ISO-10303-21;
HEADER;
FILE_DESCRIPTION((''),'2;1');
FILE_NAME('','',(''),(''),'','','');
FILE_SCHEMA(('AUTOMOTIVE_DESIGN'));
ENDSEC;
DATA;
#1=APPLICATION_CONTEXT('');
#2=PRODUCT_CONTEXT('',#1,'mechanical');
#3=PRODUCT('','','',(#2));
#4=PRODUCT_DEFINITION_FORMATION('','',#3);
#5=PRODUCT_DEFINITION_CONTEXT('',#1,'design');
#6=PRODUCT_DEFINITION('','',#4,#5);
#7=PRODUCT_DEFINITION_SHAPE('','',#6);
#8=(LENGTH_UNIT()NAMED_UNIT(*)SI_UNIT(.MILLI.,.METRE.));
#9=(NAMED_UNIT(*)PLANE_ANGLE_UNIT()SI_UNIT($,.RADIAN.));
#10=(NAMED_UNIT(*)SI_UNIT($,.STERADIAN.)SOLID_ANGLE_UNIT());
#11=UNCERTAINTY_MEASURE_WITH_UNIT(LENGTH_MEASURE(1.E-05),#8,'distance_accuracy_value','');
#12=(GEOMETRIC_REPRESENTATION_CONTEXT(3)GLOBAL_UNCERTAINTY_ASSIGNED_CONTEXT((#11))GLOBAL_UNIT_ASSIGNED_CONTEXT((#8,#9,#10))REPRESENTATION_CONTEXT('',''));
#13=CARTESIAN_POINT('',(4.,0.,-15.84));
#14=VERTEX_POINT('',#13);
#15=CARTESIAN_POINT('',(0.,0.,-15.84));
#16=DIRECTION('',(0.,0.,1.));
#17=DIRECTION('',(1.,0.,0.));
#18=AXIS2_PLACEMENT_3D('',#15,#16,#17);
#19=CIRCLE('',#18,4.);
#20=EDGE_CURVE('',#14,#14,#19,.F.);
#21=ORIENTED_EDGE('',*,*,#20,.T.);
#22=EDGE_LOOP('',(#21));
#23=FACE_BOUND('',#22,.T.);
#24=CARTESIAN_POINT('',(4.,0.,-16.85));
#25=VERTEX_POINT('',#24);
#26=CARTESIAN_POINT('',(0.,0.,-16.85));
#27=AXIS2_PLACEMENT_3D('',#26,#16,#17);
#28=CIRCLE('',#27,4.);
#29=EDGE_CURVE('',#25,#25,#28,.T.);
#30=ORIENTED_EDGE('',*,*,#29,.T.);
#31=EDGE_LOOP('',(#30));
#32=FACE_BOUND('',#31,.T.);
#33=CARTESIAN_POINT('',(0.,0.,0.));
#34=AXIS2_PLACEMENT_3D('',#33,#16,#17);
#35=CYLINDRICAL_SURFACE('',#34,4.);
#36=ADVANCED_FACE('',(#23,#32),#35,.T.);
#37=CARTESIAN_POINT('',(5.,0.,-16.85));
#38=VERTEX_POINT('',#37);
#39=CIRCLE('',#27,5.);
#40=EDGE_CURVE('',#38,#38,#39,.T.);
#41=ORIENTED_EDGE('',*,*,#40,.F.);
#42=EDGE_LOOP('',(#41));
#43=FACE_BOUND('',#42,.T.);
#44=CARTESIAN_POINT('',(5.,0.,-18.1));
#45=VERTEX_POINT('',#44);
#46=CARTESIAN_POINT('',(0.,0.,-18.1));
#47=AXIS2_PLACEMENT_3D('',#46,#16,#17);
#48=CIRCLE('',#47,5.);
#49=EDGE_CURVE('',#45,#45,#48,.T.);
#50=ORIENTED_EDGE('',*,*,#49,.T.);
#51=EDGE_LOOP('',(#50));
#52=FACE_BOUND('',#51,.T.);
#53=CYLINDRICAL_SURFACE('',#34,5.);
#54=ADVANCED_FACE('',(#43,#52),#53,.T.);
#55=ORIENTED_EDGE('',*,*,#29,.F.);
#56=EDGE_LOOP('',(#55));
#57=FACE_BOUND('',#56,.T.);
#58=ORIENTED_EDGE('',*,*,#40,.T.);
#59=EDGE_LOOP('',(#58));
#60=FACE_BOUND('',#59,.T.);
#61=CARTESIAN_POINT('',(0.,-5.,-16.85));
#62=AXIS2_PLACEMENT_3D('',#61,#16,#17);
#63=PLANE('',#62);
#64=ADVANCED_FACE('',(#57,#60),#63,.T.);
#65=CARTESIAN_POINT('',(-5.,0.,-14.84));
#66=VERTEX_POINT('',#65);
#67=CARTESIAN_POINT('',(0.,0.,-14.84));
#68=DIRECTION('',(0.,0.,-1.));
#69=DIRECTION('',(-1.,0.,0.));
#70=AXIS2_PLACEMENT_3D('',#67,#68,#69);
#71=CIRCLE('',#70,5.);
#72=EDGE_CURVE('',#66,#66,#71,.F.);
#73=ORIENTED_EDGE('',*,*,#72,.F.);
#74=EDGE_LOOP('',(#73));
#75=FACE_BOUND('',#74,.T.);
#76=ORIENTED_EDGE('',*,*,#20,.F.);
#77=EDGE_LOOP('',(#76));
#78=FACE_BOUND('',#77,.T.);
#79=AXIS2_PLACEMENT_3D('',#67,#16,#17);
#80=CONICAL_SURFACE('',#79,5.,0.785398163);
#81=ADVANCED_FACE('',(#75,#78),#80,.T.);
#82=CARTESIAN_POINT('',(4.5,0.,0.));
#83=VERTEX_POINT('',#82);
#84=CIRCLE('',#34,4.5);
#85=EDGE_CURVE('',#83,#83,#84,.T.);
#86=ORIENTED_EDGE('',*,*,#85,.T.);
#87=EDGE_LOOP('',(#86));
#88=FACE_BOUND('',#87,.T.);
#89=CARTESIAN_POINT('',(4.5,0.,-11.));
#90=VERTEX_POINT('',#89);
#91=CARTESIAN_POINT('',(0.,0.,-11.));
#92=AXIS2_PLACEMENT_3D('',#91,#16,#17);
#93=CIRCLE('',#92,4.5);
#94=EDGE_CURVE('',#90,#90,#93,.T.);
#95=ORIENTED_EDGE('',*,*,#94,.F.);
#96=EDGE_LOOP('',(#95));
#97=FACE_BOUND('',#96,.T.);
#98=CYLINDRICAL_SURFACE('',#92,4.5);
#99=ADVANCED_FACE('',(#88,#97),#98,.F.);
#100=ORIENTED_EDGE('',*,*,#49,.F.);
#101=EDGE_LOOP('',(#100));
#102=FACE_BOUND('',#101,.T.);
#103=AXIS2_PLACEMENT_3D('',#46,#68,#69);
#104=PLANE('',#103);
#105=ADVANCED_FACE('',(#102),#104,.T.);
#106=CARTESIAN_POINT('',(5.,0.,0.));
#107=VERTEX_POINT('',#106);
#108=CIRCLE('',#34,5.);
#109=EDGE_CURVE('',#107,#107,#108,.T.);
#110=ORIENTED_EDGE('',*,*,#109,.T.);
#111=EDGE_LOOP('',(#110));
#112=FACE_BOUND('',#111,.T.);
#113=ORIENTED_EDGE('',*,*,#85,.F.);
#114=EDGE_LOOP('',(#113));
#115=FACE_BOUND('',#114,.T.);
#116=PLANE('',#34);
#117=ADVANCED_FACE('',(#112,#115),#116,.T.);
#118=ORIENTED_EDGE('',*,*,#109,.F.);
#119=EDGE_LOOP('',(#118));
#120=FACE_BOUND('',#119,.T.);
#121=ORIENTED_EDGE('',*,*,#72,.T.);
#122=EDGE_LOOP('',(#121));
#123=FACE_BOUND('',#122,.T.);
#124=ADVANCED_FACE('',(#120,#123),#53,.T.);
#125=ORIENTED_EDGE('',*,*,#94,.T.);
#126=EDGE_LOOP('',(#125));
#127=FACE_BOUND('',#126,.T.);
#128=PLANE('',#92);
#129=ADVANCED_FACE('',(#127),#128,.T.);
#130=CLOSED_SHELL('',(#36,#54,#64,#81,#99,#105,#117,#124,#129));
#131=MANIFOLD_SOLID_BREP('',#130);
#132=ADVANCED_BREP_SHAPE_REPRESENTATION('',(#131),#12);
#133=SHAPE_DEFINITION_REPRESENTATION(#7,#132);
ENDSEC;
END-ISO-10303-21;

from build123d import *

# Parameters (mm, degrees)
SKETCH2_R          = 4.5
CUT_EXTRUDE1_DEPTH = 11
CHAMFER2_SIZE      = 2


with BuildPart() as part:
    # Sketch1 → Revolve1 (revolve)
    with BuildSketch(Plane(origin=(0, 0, 0), x_dir=(0, 0, -1), z_dir=(1, 0, 0)), mode=Mode.PRIVATE) as revolve1_sk:
        Polygon((16.85, -5), (18.1, -5), (18.1, 0), (0, 0), (0, -5), (16.84, -5), (16.84, -4), (16.85, -4), align=None)
    revolve(revolve1_sk.sketch.rotate(Axis((0, 0, 0), (0, 0, -1)), 270), axis=Axis((0, 0, 0), (0, 0, -1)))

    # Sketch2 → Cut-Extrude1 (cut)
    with BuildSketch(Plane.XY):
        Circle(SKETCH2_R)
    extrude(amount=-CUT_EXTRUDE1_DEPTH, mode=Mode.SUBTRACT)

    # Chamfer2
    # the kernel refuses this chamfer: 2 mm, written as the material it takes off along each edge
    with BuildSketch(Plane(origin=(0, 0, -16.84), x_dir=(1, 0, 0), z_dir=(0, 1, 0))) as chamfer2_piece_1_section:
        Polygon((5 - CHAMFER2_SIZE, 0), (5, -CHAMFER2_SIZE), (5, 0), align=None)
    chamfer2_piece_1 = revolve(axis=Axis((0, 0, -16.84), (0, 0, -1)), mode=Mode.PRIVATE)
    chamfer2_piece_1 = chamfer2_piece_1 - Plane(origin=(0, 0, -15.337254953), x_dir=(1, 0, 0), z_dir=(0, 0, -1)) * Cylinder(4, 20, mode=Mode.PRIVATE)
    add(chamfer2_piece_1, mode=Mode.SUBTRACT)


solid = part.part
